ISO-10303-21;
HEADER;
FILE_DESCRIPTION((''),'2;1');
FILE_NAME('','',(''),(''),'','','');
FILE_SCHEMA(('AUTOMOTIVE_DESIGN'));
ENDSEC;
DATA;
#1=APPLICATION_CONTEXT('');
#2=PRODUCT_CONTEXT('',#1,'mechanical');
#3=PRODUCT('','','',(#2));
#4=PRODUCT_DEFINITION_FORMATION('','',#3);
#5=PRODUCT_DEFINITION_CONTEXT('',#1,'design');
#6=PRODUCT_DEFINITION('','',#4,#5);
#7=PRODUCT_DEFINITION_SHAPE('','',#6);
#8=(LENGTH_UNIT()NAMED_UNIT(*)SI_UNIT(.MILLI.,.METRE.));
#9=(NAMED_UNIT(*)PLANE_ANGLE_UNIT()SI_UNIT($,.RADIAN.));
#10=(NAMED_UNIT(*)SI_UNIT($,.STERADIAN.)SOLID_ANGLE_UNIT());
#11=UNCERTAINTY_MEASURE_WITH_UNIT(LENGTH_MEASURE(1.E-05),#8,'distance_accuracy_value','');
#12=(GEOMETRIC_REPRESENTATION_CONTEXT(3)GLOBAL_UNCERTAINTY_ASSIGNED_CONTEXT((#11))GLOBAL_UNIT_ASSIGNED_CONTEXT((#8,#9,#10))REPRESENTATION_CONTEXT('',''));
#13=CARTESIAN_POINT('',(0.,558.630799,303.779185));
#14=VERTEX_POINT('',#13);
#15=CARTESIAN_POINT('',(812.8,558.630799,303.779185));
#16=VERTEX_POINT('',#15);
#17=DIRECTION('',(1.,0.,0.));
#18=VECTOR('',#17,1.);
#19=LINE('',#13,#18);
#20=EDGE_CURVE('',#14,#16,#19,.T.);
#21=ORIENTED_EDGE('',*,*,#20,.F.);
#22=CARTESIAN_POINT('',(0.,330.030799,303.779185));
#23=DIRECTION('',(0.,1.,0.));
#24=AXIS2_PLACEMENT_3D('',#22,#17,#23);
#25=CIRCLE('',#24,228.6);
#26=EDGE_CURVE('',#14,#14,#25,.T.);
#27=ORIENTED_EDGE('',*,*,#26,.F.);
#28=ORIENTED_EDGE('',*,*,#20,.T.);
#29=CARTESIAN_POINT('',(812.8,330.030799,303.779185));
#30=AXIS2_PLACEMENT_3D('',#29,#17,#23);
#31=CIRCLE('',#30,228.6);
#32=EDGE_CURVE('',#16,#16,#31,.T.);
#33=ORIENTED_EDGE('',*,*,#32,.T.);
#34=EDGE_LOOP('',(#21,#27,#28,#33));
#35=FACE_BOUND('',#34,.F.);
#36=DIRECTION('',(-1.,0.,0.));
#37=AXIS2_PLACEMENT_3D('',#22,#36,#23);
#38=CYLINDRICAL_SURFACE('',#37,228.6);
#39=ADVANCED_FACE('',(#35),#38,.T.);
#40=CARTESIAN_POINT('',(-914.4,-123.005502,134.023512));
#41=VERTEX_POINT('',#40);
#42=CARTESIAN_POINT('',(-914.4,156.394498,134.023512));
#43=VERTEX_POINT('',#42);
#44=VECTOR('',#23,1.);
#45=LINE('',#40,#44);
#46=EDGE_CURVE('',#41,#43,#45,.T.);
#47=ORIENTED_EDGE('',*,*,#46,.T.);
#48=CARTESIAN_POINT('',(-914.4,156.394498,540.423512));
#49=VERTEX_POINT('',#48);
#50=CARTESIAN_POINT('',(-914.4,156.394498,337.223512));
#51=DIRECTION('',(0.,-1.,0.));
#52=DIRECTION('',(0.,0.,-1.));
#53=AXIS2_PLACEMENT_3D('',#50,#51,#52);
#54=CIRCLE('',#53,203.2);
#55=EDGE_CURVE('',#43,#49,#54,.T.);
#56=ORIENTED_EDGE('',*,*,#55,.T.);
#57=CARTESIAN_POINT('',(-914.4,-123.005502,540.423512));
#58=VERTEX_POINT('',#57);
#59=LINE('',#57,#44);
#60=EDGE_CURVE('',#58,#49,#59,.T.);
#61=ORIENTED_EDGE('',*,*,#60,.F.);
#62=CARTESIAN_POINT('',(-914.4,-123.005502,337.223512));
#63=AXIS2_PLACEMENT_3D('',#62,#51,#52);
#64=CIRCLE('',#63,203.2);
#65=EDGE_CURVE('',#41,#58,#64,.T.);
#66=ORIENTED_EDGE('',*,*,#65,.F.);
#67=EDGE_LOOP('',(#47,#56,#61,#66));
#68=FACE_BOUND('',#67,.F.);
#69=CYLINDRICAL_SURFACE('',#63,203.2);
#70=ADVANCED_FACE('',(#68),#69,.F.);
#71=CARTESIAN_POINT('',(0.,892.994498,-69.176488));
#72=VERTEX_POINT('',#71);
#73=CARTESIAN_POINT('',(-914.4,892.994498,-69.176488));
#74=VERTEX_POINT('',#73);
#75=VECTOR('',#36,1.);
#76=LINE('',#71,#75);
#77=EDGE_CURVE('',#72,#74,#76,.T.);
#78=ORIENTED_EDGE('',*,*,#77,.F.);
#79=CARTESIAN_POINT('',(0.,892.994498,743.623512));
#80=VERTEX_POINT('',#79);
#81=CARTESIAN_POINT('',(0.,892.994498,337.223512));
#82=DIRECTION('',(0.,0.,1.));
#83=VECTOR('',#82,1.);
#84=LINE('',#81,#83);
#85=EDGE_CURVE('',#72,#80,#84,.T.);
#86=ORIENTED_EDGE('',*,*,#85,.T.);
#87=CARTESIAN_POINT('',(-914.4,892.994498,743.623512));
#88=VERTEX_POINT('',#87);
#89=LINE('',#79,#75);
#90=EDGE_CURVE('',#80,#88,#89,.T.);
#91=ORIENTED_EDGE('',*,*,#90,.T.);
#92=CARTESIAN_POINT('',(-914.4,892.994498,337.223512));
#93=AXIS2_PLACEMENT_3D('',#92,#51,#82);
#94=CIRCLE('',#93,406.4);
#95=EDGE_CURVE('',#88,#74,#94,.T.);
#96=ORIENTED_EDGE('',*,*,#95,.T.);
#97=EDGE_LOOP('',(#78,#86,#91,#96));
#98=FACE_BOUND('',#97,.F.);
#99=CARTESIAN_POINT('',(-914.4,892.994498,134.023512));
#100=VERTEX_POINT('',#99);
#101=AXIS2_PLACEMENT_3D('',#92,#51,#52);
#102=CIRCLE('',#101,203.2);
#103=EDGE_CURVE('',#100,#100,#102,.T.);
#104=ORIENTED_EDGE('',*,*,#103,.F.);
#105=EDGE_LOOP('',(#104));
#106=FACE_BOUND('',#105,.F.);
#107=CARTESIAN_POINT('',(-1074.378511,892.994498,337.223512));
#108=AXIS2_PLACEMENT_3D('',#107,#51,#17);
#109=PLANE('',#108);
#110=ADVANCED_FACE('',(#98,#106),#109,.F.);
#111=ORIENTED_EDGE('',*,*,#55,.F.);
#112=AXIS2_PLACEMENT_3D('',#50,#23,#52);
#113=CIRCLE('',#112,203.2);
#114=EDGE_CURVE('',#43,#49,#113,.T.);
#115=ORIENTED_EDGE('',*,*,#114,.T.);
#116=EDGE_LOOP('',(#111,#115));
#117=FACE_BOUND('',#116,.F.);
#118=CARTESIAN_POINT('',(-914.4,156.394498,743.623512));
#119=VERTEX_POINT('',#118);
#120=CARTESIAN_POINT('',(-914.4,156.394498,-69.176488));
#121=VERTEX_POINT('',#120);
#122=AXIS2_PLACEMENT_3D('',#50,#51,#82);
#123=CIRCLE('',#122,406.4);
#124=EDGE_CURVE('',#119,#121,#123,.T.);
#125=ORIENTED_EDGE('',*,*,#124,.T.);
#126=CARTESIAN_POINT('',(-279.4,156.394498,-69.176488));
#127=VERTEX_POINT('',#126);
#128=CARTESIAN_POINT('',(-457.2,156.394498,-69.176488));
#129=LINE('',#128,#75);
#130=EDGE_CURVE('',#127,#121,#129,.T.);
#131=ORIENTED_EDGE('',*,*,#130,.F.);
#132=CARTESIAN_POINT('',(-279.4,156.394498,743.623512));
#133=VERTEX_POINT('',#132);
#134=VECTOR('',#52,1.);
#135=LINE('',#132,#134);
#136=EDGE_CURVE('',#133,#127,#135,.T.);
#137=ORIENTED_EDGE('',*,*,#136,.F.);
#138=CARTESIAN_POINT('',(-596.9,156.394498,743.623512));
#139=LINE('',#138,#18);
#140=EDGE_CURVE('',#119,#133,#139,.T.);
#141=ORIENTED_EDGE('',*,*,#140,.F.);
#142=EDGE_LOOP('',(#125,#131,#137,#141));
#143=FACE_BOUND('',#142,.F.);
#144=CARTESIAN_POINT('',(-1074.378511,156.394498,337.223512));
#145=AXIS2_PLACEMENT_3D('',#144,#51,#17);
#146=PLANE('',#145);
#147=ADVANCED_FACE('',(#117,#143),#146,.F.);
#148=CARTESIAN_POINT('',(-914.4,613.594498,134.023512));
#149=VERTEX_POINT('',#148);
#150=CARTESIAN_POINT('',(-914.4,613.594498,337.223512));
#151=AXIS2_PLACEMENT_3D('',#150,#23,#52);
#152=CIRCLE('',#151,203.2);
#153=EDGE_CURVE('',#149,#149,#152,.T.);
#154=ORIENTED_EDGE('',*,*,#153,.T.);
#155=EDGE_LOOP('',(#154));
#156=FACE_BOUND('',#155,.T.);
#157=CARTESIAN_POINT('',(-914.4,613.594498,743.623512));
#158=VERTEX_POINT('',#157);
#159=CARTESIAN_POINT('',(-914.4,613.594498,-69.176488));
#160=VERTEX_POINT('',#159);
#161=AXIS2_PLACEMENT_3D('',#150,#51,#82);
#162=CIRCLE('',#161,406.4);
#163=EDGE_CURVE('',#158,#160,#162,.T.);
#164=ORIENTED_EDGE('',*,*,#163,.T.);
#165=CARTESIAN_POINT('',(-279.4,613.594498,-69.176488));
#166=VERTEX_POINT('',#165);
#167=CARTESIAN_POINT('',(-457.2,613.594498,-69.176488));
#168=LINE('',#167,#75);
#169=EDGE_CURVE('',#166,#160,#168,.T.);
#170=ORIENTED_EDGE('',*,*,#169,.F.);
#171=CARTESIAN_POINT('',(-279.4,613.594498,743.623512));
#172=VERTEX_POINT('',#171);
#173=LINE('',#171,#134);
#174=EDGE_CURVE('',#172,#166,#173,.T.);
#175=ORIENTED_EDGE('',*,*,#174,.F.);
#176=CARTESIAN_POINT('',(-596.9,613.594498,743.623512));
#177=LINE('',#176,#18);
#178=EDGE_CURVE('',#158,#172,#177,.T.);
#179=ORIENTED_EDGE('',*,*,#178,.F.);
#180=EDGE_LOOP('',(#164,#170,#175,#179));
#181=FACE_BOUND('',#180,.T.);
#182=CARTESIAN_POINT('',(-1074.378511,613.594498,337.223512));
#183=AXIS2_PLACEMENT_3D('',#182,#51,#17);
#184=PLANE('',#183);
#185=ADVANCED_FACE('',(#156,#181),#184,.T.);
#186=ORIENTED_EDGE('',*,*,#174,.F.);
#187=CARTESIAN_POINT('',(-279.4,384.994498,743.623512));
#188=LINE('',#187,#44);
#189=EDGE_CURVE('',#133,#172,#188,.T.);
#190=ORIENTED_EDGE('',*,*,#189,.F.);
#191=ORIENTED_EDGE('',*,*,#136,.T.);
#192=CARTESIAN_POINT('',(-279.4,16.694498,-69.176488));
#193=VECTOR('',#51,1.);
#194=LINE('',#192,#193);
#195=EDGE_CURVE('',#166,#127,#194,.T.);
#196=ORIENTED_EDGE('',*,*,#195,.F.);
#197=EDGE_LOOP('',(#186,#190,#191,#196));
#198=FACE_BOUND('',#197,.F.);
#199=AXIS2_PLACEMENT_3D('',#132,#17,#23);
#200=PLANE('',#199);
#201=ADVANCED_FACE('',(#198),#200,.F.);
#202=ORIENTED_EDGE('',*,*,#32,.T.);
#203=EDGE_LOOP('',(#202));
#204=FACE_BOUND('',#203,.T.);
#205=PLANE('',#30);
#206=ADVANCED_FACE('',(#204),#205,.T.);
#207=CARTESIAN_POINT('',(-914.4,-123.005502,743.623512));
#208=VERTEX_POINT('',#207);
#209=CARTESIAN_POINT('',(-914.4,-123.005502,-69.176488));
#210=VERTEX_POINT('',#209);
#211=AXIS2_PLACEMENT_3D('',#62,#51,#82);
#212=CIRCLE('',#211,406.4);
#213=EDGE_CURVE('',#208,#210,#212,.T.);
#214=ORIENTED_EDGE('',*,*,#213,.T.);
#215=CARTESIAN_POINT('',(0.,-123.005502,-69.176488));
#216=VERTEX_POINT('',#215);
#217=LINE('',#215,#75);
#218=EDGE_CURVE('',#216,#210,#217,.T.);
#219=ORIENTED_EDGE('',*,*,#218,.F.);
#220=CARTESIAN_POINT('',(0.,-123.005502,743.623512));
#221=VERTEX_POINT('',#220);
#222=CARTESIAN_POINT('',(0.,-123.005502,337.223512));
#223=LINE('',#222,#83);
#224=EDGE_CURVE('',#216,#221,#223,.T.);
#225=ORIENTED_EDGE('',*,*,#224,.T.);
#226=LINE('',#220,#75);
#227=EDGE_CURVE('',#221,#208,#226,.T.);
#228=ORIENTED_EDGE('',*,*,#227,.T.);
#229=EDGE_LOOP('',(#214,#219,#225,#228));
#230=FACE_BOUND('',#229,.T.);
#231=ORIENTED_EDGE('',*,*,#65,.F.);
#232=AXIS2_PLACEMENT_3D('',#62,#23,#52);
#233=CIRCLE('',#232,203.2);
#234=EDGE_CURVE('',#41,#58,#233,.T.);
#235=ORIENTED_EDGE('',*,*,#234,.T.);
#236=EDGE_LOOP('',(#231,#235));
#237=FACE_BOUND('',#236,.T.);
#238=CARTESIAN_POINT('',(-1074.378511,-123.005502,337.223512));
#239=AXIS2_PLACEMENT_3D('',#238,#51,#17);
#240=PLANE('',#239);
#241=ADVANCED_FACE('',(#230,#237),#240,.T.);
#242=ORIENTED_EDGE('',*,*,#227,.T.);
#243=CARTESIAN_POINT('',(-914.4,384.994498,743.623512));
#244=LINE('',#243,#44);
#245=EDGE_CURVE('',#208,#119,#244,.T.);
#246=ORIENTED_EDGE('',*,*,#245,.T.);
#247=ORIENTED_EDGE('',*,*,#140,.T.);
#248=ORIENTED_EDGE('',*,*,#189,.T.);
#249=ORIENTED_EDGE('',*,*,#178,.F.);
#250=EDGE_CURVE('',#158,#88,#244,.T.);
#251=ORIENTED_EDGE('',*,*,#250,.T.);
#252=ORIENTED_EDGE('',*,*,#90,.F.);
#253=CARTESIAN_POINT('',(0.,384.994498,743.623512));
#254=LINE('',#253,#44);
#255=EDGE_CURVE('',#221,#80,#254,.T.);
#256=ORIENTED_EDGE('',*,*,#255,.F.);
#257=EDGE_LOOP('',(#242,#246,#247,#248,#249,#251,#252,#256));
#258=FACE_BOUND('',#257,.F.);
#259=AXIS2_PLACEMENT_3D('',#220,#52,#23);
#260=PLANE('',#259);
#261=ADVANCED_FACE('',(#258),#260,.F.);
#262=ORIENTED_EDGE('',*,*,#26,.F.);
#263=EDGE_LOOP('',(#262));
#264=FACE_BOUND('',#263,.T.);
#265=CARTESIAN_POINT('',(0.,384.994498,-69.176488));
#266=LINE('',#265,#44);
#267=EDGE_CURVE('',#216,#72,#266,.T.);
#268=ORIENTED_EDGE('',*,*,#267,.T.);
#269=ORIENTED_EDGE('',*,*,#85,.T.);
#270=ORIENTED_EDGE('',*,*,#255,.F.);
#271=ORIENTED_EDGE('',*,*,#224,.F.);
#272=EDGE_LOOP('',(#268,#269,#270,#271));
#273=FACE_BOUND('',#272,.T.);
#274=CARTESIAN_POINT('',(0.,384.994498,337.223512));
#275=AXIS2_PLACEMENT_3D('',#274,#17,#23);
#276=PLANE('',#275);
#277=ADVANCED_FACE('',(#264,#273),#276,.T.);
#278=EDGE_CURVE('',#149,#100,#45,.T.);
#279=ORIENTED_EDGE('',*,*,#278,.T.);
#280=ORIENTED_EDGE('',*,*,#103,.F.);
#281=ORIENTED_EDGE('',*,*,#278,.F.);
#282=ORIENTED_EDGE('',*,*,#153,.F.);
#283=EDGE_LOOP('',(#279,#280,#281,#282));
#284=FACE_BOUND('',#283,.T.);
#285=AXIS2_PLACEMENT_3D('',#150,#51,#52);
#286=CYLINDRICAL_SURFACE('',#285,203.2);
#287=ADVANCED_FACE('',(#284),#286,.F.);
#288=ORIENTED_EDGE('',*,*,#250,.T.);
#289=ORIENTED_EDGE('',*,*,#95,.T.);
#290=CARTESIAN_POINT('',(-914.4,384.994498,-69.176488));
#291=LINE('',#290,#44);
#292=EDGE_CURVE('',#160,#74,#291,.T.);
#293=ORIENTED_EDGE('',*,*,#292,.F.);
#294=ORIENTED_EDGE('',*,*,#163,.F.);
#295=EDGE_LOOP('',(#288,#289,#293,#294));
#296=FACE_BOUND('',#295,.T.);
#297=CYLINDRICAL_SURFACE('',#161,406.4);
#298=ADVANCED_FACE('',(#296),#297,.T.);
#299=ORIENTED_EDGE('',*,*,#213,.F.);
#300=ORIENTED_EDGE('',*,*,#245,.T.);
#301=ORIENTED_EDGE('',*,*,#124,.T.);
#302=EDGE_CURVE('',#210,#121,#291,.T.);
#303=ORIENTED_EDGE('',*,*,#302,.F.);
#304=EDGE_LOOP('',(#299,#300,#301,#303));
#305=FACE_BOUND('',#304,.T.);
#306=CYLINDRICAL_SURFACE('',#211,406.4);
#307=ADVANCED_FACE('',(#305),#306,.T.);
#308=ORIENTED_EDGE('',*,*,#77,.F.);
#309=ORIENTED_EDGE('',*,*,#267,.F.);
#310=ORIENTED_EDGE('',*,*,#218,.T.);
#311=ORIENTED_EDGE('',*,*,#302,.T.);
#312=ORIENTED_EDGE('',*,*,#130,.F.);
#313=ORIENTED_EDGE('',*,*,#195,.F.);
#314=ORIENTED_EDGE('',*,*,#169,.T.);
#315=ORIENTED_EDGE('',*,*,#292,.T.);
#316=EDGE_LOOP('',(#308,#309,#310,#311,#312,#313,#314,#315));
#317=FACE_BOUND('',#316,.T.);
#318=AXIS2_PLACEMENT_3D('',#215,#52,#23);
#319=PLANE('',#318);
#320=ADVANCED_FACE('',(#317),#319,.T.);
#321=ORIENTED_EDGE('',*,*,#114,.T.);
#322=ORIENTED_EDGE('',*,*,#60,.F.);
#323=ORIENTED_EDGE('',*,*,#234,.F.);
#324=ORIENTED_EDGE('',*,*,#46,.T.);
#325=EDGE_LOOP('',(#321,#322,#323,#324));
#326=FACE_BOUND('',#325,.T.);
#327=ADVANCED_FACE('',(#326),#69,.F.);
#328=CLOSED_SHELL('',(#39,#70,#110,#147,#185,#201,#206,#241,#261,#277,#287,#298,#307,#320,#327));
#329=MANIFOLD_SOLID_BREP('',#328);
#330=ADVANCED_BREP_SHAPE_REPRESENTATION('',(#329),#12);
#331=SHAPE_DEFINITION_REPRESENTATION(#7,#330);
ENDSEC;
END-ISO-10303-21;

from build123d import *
from build123d import SkipClean  # not in build123d's __all__

# Parameters (mm, degrees)
F0_R      = 228.6
F1_DEPTH  = 812.8
F0_W      = 1016
F0_H      = 812.8
F1_FACE_R = 228.6
F2_DEPTH  = 914.4
F4_DEPTH  = 279.4
F6_DEPTH  = 1016.001
F7_W      = 635
F7_H      = 457.2
F8_DEPTH  = 812.801
F10_DEPTH = 279.4


# Not quite as in the source:
# - after a boolean that leaves OpenCascade's solid faulty, fix() repairs it


with BuildPart() as f1:
    # F0 (on Right) → F1 (new body)
    with BuildSketch(Plane.YZ):
        with Locations((330.030798912, 303.7791848183)):
            Circle(F0_R)
    extrude(amount=F1_DEPTH)

    # F0 (on Right) + F1_face (on face) → F2 (join)
    with BuildSketch(Plane.YZ):
        with Locations((384.9944980741, 337.2235123754)):
            Rectangle(F0_W, F0_H)
        with Locations((330.030798912, 303.7791848183)):
            Circle(F0_R, mode=Mode.SUBTRACT)
    with BuildSketch(Plane(origin=(0, 330.030798912, 303.7791848183), x_dir=(0, 1, 0), z_dir=(-1, 0, 0))):
        Circle(F1_FACE_R)
    extrude(amount=-F2_DEPTH, dir=(1, 0, 0))

    # F3 (on face) → F4 (join)
    with BuildSketch(Plane.XZ.offset(123.0055019259)):
        with BuildLine():
            ThreePointArc((-914.4, 743.6235123754), (-1320.8, 337.2235123754), (-914.4, -69.1764876246))
            Line((-914.4, -69.1764876246), (-914.4, 134.0235123754))
            ThreePointArc((-914.4, 134.0235123754), (-1117.6, 337.2235123754), (-914.4, 540.4235123754))
            Line((-914.4, 540.4235123754), (-914.4, 743.6235123754))
        make_face()
    extrude(amount=-F4_DEPTH)

    # F5 (on face) → F6 (cut, through all)
    with BuildSketch(Plane.XZ.offset(123.0055019259)):
        with BuildLine():
            Line((-914.4, 540.4235123754), (-914.4, 134.0235123754))
            ThreePointArc((-914.4, 134.0235123754), (-770.7159020629, 193.5394144382), (-711.2, 337.2235123754))
            ThreePointArc((-711.2, 337.2235123754), (-770.7159020629, 480.9076103125), (-914.4, 540.4235123754))
        make_face()
    with SkipClean():  # cleaning this boolean's faces spoils the solid; the shape is the same uncleaned
        extrude(amount=-F6_DEPTH, mode=Mode.SUBTRACT)

    # F7 (on face) → F8 (cut, through all)
    with BuildSketch(Plane.XY.offset(743.6235123754)):
        with Locations((-596.9, 384.9944980741)):
            Rectangle(F7_W, F7_H)
    extrude(amount=-F8_DEPTH, mode=Mode.SUBTRACT)

    add(f1.part.fix(), mode=Mode.REPLACE)

    # F9 (on face) → F10 (join)
    with BuildSketch(Plane.XZ.offset(-613.5944980741)):
        with BuildLine():
            Line((-914.4, 540.4235123754), (-914.4, 743.6235123754))
            ThreePointArc((-914.4, 743.6235123754), (-1320.8, 337.2235123754), (-914.4, -69.1764876246))
            Line((-914.4, -69.1764876246), (-914.4, 134.0235123754))
            ThreePointArc((-914.4, 134.0235123754), (-1117.6, 337.2235123754), (-914.4, 540.4235123754))
        make_face()
    extrude(amount=-F10_DEPTH)


solid = f1.part
